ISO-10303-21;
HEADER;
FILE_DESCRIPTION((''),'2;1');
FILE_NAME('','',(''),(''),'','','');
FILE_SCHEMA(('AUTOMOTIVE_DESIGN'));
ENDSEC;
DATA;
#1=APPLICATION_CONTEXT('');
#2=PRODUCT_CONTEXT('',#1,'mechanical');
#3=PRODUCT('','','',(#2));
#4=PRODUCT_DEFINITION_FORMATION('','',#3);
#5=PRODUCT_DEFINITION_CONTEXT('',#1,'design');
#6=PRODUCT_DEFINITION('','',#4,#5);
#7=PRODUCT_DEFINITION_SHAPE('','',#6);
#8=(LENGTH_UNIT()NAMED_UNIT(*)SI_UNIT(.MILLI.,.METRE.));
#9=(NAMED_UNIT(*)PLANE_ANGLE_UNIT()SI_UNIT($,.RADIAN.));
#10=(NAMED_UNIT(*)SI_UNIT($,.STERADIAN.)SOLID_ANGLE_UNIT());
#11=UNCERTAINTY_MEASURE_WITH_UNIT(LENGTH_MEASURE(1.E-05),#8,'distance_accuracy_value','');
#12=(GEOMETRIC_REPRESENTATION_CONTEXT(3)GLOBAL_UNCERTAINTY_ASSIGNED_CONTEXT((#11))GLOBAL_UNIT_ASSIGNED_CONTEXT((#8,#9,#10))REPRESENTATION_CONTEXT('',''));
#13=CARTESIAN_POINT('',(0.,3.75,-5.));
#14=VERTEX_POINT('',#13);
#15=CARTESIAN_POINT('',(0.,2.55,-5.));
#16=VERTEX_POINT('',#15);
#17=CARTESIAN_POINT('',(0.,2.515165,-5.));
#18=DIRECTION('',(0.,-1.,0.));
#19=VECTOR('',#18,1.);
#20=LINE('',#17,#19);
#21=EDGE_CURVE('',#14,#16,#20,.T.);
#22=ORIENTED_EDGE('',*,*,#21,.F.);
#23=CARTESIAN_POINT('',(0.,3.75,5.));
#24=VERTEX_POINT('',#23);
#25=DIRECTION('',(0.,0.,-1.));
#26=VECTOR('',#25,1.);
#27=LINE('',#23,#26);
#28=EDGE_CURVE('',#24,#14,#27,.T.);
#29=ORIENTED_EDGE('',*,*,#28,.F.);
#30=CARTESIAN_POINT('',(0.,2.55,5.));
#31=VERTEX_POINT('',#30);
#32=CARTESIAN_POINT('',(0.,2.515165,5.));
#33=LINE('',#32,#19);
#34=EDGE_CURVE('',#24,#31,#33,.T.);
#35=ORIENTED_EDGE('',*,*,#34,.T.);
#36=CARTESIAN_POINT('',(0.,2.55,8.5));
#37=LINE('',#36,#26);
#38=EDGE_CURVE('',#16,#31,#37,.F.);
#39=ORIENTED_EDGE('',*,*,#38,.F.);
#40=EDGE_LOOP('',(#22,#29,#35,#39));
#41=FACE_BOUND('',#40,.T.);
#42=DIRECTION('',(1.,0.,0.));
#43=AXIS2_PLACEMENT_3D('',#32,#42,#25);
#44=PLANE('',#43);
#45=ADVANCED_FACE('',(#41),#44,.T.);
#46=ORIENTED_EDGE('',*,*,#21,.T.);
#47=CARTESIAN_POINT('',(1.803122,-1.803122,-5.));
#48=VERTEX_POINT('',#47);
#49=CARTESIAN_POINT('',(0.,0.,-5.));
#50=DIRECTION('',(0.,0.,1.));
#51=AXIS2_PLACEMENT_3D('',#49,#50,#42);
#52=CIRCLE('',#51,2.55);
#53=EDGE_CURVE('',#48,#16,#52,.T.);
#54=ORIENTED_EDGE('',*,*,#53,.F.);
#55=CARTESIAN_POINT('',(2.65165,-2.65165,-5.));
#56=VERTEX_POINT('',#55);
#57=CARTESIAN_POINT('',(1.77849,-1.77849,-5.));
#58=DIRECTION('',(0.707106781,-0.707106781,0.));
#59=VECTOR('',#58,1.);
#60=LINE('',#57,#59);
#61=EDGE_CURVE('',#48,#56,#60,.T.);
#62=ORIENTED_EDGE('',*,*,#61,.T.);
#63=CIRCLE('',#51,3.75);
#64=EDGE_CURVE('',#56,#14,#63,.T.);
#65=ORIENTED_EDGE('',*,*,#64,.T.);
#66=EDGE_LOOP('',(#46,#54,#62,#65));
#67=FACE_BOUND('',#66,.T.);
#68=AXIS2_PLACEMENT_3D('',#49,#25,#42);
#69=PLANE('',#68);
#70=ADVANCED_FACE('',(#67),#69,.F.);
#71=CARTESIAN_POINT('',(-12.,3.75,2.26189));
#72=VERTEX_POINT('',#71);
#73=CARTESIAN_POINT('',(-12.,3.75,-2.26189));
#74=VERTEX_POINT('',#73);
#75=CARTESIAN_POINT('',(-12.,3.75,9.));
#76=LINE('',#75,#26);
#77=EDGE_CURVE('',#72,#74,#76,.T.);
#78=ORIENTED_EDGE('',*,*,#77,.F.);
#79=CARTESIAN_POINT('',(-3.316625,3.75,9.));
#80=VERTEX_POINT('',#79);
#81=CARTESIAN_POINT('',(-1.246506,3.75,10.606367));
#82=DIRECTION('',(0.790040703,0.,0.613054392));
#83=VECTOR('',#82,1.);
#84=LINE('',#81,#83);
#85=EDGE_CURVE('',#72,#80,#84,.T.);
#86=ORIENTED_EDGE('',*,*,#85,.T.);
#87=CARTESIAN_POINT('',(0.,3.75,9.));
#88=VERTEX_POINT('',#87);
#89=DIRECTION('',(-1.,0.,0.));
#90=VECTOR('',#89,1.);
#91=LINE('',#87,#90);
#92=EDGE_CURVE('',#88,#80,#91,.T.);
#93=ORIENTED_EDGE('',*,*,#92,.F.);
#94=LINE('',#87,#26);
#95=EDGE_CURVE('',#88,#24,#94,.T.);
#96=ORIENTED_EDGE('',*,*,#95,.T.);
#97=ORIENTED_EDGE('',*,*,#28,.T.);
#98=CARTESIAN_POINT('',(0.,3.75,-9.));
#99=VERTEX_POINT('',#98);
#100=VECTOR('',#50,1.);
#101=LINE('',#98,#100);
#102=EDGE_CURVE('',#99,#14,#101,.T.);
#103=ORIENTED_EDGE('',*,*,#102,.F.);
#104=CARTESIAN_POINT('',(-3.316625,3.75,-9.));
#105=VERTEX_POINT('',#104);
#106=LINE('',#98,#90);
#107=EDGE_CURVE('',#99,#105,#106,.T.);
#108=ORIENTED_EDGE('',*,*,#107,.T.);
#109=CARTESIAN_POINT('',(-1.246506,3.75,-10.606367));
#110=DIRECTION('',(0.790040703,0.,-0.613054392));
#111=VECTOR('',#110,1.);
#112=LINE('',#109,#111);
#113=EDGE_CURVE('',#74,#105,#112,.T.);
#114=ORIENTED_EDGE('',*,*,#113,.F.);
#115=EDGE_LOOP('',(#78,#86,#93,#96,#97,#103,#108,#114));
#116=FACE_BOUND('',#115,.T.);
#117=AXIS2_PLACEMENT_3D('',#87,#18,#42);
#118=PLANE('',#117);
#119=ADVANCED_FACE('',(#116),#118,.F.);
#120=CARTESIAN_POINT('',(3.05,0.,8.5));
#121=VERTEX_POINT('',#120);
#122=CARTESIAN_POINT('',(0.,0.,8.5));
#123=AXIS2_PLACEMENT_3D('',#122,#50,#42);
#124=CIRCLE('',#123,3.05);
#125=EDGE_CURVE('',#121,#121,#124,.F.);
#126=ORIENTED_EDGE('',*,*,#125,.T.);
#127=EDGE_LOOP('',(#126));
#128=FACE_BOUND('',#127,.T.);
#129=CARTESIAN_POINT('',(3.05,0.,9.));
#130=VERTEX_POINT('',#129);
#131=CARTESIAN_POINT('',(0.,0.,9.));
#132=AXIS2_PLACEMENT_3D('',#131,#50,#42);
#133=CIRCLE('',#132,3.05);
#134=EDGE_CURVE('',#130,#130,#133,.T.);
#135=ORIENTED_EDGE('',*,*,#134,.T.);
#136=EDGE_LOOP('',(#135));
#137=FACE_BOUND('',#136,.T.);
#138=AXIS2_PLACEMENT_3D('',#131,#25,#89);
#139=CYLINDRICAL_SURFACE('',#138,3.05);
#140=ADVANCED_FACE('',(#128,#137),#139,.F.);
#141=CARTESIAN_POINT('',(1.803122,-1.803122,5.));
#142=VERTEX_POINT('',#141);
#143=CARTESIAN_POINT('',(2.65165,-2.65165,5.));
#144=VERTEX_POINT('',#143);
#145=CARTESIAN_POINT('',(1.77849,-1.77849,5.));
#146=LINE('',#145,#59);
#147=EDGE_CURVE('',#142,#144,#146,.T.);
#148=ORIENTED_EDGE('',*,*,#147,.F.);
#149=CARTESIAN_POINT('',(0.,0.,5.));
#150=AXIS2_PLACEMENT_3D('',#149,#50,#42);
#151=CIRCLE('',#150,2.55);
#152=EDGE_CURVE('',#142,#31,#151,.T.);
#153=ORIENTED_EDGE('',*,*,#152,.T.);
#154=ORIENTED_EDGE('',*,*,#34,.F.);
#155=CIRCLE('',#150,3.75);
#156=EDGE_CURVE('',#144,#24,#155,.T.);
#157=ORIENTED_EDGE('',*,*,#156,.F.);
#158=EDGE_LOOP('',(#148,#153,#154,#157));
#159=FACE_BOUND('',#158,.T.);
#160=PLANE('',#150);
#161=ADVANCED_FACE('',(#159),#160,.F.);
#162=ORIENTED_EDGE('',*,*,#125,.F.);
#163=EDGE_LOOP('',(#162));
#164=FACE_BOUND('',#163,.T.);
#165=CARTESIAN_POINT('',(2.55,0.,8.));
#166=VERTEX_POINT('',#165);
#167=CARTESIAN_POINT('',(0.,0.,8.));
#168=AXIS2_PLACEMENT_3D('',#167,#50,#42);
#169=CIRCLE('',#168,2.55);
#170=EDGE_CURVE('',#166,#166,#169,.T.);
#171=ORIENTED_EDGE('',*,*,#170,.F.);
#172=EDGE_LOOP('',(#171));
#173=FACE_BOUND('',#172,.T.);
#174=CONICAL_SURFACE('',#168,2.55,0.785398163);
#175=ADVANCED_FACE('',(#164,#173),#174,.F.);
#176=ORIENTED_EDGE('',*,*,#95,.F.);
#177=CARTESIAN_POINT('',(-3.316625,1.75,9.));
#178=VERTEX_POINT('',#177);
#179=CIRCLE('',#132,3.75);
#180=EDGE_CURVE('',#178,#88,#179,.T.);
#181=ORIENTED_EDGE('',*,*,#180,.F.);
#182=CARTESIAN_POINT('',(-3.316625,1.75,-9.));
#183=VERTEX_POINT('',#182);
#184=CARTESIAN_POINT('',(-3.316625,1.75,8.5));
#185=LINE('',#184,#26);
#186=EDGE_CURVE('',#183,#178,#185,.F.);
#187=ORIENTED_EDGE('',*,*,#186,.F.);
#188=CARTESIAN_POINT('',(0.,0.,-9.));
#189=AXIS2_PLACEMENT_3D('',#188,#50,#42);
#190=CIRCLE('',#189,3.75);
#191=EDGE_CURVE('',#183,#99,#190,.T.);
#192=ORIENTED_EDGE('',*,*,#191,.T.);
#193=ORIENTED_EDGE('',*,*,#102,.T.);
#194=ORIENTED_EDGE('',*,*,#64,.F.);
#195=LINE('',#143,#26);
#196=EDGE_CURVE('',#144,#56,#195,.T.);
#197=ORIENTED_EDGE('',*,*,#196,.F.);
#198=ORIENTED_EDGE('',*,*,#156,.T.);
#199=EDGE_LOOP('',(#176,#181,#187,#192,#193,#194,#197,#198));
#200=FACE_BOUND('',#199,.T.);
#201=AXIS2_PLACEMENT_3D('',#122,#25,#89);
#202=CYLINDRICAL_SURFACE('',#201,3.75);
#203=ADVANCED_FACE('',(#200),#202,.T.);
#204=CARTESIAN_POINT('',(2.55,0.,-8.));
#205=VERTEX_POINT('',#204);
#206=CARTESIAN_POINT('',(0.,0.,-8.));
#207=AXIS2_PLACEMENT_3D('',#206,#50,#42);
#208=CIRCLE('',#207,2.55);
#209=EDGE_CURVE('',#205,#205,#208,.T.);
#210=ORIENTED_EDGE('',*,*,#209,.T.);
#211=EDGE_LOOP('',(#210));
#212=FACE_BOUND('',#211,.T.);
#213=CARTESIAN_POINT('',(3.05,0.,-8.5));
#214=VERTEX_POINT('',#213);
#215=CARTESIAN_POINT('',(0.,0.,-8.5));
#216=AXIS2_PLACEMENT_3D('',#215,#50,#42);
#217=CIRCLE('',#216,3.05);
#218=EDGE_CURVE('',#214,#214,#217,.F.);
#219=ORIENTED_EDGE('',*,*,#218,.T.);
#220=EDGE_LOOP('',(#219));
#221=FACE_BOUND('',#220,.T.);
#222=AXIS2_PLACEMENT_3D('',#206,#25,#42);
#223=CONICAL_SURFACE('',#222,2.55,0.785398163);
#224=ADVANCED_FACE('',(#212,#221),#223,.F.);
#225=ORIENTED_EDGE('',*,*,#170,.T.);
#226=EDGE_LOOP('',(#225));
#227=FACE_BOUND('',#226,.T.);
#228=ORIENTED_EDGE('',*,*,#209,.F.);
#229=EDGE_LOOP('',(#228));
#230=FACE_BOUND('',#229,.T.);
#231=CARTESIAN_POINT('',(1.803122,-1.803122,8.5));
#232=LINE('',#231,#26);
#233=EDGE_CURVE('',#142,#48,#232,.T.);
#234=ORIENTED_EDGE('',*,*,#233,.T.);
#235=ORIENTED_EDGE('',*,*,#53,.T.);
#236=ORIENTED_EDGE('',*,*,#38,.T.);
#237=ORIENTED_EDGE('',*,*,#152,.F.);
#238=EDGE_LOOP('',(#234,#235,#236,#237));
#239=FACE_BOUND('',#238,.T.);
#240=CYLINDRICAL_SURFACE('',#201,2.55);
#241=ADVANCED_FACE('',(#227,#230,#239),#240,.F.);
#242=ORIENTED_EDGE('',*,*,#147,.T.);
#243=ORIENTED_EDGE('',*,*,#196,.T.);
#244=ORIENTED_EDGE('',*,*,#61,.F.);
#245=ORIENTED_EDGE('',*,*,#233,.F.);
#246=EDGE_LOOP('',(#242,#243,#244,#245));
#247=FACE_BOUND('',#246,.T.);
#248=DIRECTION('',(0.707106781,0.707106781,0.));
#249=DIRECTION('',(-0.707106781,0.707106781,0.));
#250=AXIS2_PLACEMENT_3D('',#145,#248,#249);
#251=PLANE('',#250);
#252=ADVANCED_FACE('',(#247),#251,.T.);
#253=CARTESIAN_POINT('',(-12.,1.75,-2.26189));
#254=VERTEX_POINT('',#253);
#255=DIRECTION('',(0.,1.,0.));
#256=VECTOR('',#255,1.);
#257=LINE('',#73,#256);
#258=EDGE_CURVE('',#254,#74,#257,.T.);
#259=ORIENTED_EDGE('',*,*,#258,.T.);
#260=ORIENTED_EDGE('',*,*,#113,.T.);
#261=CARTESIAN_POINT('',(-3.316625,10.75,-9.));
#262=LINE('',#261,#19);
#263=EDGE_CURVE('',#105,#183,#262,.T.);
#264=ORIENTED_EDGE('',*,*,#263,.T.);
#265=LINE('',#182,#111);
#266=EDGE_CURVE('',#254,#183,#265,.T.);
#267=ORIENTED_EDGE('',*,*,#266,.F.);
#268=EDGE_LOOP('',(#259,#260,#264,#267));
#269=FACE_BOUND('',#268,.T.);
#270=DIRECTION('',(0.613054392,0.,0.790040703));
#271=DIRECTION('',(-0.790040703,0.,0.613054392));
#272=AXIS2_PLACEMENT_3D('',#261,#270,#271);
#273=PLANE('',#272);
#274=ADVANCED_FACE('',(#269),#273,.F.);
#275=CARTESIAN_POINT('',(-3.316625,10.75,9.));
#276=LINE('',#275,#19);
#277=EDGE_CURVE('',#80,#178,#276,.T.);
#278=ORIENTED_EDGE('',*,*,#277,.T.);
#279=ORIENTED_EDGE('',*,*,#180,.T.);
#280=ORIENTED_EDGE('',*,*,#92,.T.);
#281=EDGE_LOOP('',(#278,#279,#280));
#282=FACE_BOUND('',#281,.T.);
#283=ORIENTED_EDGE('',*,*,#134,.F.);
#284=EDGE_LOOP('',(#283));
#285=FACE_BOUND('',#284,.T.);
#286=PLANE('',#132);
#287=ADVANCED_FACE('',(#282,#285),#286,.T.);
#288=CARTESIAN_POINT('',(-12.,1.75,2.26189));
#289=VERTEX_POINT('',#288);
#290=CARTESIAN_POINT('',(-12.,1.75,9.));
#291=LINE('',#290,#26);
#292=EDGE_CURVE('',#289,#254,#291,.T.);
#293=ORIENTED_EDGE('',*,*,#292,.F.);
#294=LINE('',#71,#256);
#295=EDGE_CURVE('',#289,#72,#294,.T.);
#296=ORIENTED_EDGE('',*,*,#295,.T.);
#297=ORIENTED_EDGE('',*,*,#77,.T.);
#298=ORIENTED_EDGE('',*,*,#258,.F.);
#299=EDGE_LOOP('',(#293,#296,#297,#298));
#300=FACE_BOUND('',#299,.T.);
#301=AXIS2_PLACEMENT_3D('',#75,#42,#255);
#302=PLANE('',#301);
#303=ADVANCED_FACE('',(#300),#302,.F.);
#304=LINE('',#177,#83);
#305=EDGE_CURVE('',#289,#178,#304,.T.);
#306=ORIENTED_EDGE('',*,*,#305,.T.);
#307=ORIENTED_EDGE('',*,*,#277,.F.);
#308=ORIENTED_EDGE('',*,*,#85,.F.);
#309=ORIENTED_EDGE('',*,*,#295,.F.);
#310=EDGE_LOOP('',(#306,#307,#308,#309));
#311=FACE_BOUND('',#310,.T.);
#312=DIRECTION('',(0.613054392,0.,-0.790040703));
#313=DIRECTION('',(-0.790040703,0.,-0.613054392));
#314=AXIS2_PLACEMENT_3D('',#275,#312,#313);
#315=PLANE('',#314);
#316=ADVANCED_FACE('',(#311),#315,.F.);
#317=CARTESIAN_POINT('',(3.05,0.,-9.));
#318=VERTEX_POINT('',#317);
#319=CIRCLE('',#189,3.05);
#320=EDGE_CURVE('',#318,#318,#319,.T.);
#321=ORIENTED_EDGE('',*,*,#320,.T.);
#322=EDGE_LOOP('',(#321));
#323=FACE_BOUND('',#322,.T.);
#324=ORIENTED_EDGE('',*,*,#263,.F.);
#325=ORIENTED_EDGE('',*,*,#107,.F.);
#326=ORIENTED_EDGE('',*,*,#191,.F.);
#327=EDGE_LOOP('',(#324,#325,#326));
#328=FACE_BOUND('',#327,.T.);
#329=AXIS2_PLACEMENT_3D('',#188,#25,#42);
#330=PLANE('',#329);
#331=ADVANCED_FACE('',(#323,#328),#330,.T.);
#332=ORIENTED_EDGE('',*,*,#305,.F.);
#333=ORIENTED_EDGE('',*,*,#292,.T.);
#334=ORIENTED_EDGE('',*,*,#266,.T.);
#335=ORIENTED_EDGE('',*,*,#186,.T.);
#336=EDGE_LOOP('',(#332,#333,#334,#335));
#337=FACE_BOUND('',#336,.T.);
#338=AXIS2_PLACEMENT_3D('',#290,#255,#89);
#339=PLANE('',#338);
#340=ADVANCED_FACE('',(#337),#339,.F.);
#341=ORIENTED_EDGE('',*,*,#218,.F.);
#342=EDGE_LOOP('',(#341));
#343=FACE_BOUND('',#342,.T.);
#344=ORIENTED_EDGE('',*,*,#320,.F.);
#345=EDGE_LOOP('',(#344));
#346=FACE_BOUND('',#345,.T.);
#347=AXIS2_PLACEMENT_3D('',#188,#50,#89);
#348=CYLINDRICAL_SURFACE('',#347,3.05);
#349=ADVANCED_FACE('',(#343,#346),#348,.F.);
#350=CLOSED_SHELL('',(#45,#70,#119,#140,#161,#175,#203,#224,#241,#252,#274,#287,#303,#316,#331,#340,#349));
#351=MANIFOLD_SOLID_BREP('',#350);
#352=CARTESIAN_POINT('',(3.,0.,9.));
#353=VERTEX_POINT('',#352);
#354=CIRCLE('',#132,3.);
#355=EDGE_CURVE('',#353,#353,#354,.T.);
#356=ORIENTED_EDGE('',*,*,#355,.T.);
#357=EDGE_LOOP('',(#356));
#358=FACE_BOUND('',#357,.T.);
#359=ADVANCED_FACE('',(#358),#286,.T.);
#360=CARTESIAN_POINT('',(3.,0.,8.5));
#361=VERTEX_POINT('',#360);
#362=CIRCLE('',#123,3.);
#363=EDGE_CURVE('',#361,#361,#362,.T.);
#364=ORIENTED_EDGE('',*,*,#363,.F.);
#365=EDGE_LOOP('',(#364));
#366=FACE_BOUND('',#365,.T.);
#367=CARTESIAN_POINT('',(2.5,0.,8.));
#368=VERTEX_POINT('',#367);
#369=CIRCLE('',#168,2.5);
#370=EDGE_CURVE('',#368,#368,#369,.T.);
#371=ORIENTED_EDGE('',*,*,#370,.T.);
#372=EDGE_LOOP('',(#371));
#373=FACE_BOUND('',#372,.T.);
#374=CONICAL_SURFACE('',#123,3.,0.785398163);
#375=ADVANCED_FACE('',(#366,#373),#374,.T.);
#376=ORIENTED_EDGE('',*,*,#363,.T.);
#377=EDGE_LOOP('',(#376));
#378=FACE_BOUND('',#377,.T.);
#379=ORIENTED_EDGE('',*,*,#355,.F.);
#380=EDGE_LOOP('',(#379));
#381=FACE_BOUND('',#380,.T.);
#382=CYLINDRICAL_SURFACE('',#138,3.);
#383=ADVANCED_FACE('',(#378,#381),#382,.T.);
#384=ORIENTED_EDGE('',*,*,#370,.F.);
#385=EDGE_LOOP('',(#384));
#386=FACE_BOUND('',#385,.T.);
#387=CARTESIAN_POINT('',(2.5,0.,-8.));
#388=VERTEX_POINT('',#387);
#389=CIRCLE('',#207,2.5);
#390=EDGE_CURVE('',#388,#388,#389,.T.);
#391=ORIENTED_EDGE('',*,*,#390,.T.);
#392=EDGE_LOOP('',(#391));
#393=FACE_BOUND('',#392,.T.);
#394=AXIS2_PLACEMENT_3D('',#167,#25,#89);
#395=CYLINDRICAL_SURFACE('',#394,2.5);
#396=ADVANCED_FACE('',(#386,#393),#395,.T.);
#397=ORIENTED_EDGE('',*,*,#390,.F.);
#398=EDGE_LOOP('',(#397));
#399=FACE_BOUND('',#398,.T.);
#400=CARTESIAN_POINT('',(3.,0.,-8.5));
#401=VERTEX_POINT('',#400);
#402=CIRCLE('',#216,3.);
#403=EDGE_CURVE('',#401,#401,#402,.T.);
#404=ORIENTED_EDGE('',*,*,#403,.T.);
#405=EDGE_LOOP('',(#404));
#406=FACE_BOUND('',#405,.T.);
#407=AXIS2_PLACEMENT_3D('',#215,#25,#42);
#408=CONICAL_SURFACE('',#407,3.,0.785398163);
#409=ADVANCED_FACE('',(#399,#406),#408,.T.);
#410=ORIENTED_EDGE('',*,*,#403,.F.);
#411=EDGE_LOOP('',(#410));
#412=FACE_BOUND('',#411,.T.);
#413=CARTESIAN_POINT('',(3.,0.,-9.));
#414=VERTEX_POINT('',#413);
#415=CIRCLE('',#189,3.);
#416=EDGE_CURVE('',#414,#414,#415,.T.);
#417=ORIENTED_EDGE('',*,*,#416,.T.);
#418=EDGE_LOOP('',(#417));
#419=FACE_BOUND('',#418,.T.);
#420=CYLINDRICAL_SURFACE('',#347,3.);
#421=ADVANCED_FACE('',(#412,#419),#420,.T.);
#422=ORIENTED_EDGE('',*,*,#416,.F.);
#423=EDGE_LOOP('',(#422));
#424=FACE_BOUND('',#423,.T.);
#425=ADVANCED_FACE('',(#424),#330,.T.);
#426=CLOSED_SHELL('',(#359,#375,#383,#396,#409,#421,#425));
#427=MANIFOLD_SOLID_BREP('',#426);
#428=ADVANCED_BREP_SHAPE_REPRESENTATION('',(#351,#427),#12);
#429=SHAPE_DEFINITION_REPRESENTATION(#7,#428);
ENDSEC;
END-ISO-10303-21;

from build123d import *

# Parameters (mm, degrees)
SKETCH2_R           = 2.5
BOSS_EXTRUDE1_DEPTH = 8
SKETCH3_R           = 3.75
SKETCH3_R_2         = 2.55
BOSS_EXTRUDE2_DEPTH = 8.5
SKETCH4_R           = 3
BOSS_EXTRUDE3_DEPTH = 1
CHAMFER2_SIZE       = 0.5
CHAMFER3_SIZE       = 0.5
SKETCH6_R           = 3.75
SKETCH6_R_2         = 3.05
BOSS_EXTRUDE5_DEPTH = 0.5
CUT_EXTRUDE1_DEPTH  = 5
BOSS_EXTRUDE7_DEPTH = 9
CUT_EXTRUDE2_DEPTH  = 9
MIRROR1_START       = -8
MIRROR1_2_DEPTH     = 8
MIRROR1_START_2     = -9
MIRROR1_3_OUTLINE_R = 3.05
MIRROR1_3_DEPTH     = 4
MIRROR1_4_DEPTH     = 3
MIRROR1_START_3     = -15
MIRROR1_5_OUTLINE_W = 14
MIRROR1_5_OUTLINE_H = 2
MIRROR1_5_DEPTH     = 5.856362277


with BuildPart() as part:
    # Sketch2 → Boss-Extrude1 (new body)
    with BuildSketch(Plane.XY):
        Circle(SKETCH2_R)
    extrude(amount=BOSS_EXTRUDE1_DEPTH)

    # Sketch4 → Boss-Extrude3 (add)
    with BuildSketch(Plane.XY.offset(8)):
        Circle(SKETCH4_R)
    extrude(amount=BOSS_EXTRUDE3_DEPTH)

    # Chamfer2
    chamfer2_edges = [part.edges().sort_by_distance(p)[0] for p in [
        (-3, 0, 8),
    ]]
    chamfer(chamfer2_edges, length=CHAMFER2_SIZE - 0.0001)  # a hair under: the kernel refuses the full size

    # Mirror1 6 outline → Mirror1 6 (revolve)
    with BuildSketch(Plane.XZ):
        Polygon((2.5, -8), (2.5, 0), (0, 0), (0, -9), (3, -9), (3, -8.5), align=None)
    revolve(axis=Axis((0, 0, 0), (0, 0, 1)))


with BuildPart() as body_2:
    # Sketch3 → Boss-Extrude2 (new body)
    with BuildSketch(Plane.XY):
        Circle(SKETCH3_R)
        Circle(SKETCH3_R_2, mode=Mode.SUBTRACT)
    extrude(amount=BOSS_EXTRUDE2_DEPTH)

    # Chamfer3
    chamfer3_edges = [body_2.edges().sort_by_distance(p)[0] for p in [
        (-2.55, 0, 8.5),
    ]]
    chamfer(chamfer3_edges, length=CHAMFER3_SIZE)

    # Sketch6 → Boss-Extrude5 (add)
    with BuildSketch(Plane.XY.offset(8.5)):
        Circle(SKETCH6_R)
        Circle(SKETCH6_R_2, mode=Mode.SUBTRACT)
    extrude(amount=BOSS_EXTRUDE5_DEPTH)

    # Sketch7 → Cut-Extrude1 (cut)
    with BuildSketch(Plane.XY):
        with BuildLine():
            Line((0, 2.51516471), (0, 3.75))
            ThreePointArc((0, 3.75), (3.464548247, 1.435062871), (2.651650429, -2.651650429))
            Line((2.651650429, -2.651650429), (1.778490022, -1.778490022))
            ThreePointArc((1.778490022, -1.778490022), (2.323709197, 0.962511864), (0, 2.51516471))
        make_face()
    extrude(amount=CUT_EXTRUDE1_DEPTH, mode=Mode.SUBTRACT)

    # Sketch8 → Boss-Extrude7 (add)
    with BuildSketch(Plane.XY):
        with BuildLine():
            Line((0, 3.75), (-12, 3.75))
            Line((-12, 3.75), (-12, 1.75))
            Line((-12, 1.75), (-3.031088913, 1.75))
            ThreePointArc((-3.031088913, 1.75), (-1.75, 3.031088913), (0, 3.5))
            Line((0, 3.5), (0, 3.75))
        make_face()
    extrude(amount=BOSS_EXTRUDE7_DEPTH)

    # Sketch9 → Cut-Extrude2 (cut)
    with BuildSketch(Plane.XZ.offset(-1.75)):
        Polygon((-3.31662479, 9), (-12, 2.261889819), (-12, 9), align=None)
    extrude(amount=-CUT_EXTRUDE2_DEPTH, mode=Mode.SUBTRACT)

    # Mirror1: read off the stored shape, not the designer's step
    # Mirror1 outline → Mirror1 (revolve)
    with BuildSketch(Plane.XZ):
        Polygon((2.55, -8), (3.05, -8.5), (3.05, -8), align=None)
    revolve(axis=Axis((0, 0, 0), (0, 0, 1)))

    # Mirror1 2 outline → Mirror1 2 (add)
    with BuildSketch(Plane.XY.offset(MIRROR1_START)):
        with BuildLine():
            Line((0, 3.75), (-12, 3.75))
            Line((-12, 3.75), (-12, 1.75))
            Line((-12, 1.75), (-3.31662479, 1.75))
            ThreePointArc((-3.31662479, 1.75), (-2.225798587, -3.017999445), (2.65165043, -2.65165043))
            Line((2.65165043, -2.65165043), (1.803122292, -1.803122292))
            ThreePointArc((1.803122292, -1.803122292), (-2.355892808, -0.975842753), (0, 2.55))
            Line((0, 2.55), (0, 3.75))
        make_face()
    extrude(amount=MIRROR1_2_DEPTH)

    # Mirror1 3 outline → Mirror1 3 (add)
    with BuildSketch(Plane.XY.offset(MIRROR1_START_2)):
        with BuildLine():
            Line((0, 3.75), (-12, 3.75))
            Line((-12, 3.75), (-12, 1.75))
            Line((-12, 1.75), (-3.31662479, 1.75))
            ThreePointArc((-3.31662479, 1.75), (1.936491674, -3.211308145), (0, 3.75))
        make_face()
        Circle(MIRROR1_3_OUTLINE_R, mode=Mode.SUBTRACT)
    extrude(amount=MIRROR1_3_DEPTH)

    # Mirror1 4 outline → Mirror1 4 (add)
    with BuildSketch(Plane.XY.offset(MIRROR1_START)):
        with BuildLine():
            ThreePointArc((2.156675683, -2.156675683), (2.817832574, 1.167184469), (0, 3.05))
            Line((0, 3.05), (0, 2.55))
            ThreePointArc((0, 2.55), (2.355892808, 0.975842753), (1.803122292, -1.803122292))
            Line((1.803122292, -1.803122292), (2.156675683, -2.156675683))
        make_face()
    extrude(amount=MIRROR1_4_DEPTH)

    # Mirror1 5 outline → Mirror1 5 (cut)
    with BuildSketch(Plane(origin=(0, 0, 0), x_dir=(0.7900407033397415, 0, -0.6130543916052199), z_dir=(0.6130543916052199, 0, 0.7900407033397417)).offset(MIRROR1_START_3)):
        with Locations((-3, 2.75)):
            Rectangle(MIRROR1_5_OUTLINE_W, MIRROR1_5_OUTLINE_H)
    extrude(amount=MIRROR1_5_DEPTH, mode=Mode.SUBTRACT)


solid = Compound([part.part, body_2.part])
